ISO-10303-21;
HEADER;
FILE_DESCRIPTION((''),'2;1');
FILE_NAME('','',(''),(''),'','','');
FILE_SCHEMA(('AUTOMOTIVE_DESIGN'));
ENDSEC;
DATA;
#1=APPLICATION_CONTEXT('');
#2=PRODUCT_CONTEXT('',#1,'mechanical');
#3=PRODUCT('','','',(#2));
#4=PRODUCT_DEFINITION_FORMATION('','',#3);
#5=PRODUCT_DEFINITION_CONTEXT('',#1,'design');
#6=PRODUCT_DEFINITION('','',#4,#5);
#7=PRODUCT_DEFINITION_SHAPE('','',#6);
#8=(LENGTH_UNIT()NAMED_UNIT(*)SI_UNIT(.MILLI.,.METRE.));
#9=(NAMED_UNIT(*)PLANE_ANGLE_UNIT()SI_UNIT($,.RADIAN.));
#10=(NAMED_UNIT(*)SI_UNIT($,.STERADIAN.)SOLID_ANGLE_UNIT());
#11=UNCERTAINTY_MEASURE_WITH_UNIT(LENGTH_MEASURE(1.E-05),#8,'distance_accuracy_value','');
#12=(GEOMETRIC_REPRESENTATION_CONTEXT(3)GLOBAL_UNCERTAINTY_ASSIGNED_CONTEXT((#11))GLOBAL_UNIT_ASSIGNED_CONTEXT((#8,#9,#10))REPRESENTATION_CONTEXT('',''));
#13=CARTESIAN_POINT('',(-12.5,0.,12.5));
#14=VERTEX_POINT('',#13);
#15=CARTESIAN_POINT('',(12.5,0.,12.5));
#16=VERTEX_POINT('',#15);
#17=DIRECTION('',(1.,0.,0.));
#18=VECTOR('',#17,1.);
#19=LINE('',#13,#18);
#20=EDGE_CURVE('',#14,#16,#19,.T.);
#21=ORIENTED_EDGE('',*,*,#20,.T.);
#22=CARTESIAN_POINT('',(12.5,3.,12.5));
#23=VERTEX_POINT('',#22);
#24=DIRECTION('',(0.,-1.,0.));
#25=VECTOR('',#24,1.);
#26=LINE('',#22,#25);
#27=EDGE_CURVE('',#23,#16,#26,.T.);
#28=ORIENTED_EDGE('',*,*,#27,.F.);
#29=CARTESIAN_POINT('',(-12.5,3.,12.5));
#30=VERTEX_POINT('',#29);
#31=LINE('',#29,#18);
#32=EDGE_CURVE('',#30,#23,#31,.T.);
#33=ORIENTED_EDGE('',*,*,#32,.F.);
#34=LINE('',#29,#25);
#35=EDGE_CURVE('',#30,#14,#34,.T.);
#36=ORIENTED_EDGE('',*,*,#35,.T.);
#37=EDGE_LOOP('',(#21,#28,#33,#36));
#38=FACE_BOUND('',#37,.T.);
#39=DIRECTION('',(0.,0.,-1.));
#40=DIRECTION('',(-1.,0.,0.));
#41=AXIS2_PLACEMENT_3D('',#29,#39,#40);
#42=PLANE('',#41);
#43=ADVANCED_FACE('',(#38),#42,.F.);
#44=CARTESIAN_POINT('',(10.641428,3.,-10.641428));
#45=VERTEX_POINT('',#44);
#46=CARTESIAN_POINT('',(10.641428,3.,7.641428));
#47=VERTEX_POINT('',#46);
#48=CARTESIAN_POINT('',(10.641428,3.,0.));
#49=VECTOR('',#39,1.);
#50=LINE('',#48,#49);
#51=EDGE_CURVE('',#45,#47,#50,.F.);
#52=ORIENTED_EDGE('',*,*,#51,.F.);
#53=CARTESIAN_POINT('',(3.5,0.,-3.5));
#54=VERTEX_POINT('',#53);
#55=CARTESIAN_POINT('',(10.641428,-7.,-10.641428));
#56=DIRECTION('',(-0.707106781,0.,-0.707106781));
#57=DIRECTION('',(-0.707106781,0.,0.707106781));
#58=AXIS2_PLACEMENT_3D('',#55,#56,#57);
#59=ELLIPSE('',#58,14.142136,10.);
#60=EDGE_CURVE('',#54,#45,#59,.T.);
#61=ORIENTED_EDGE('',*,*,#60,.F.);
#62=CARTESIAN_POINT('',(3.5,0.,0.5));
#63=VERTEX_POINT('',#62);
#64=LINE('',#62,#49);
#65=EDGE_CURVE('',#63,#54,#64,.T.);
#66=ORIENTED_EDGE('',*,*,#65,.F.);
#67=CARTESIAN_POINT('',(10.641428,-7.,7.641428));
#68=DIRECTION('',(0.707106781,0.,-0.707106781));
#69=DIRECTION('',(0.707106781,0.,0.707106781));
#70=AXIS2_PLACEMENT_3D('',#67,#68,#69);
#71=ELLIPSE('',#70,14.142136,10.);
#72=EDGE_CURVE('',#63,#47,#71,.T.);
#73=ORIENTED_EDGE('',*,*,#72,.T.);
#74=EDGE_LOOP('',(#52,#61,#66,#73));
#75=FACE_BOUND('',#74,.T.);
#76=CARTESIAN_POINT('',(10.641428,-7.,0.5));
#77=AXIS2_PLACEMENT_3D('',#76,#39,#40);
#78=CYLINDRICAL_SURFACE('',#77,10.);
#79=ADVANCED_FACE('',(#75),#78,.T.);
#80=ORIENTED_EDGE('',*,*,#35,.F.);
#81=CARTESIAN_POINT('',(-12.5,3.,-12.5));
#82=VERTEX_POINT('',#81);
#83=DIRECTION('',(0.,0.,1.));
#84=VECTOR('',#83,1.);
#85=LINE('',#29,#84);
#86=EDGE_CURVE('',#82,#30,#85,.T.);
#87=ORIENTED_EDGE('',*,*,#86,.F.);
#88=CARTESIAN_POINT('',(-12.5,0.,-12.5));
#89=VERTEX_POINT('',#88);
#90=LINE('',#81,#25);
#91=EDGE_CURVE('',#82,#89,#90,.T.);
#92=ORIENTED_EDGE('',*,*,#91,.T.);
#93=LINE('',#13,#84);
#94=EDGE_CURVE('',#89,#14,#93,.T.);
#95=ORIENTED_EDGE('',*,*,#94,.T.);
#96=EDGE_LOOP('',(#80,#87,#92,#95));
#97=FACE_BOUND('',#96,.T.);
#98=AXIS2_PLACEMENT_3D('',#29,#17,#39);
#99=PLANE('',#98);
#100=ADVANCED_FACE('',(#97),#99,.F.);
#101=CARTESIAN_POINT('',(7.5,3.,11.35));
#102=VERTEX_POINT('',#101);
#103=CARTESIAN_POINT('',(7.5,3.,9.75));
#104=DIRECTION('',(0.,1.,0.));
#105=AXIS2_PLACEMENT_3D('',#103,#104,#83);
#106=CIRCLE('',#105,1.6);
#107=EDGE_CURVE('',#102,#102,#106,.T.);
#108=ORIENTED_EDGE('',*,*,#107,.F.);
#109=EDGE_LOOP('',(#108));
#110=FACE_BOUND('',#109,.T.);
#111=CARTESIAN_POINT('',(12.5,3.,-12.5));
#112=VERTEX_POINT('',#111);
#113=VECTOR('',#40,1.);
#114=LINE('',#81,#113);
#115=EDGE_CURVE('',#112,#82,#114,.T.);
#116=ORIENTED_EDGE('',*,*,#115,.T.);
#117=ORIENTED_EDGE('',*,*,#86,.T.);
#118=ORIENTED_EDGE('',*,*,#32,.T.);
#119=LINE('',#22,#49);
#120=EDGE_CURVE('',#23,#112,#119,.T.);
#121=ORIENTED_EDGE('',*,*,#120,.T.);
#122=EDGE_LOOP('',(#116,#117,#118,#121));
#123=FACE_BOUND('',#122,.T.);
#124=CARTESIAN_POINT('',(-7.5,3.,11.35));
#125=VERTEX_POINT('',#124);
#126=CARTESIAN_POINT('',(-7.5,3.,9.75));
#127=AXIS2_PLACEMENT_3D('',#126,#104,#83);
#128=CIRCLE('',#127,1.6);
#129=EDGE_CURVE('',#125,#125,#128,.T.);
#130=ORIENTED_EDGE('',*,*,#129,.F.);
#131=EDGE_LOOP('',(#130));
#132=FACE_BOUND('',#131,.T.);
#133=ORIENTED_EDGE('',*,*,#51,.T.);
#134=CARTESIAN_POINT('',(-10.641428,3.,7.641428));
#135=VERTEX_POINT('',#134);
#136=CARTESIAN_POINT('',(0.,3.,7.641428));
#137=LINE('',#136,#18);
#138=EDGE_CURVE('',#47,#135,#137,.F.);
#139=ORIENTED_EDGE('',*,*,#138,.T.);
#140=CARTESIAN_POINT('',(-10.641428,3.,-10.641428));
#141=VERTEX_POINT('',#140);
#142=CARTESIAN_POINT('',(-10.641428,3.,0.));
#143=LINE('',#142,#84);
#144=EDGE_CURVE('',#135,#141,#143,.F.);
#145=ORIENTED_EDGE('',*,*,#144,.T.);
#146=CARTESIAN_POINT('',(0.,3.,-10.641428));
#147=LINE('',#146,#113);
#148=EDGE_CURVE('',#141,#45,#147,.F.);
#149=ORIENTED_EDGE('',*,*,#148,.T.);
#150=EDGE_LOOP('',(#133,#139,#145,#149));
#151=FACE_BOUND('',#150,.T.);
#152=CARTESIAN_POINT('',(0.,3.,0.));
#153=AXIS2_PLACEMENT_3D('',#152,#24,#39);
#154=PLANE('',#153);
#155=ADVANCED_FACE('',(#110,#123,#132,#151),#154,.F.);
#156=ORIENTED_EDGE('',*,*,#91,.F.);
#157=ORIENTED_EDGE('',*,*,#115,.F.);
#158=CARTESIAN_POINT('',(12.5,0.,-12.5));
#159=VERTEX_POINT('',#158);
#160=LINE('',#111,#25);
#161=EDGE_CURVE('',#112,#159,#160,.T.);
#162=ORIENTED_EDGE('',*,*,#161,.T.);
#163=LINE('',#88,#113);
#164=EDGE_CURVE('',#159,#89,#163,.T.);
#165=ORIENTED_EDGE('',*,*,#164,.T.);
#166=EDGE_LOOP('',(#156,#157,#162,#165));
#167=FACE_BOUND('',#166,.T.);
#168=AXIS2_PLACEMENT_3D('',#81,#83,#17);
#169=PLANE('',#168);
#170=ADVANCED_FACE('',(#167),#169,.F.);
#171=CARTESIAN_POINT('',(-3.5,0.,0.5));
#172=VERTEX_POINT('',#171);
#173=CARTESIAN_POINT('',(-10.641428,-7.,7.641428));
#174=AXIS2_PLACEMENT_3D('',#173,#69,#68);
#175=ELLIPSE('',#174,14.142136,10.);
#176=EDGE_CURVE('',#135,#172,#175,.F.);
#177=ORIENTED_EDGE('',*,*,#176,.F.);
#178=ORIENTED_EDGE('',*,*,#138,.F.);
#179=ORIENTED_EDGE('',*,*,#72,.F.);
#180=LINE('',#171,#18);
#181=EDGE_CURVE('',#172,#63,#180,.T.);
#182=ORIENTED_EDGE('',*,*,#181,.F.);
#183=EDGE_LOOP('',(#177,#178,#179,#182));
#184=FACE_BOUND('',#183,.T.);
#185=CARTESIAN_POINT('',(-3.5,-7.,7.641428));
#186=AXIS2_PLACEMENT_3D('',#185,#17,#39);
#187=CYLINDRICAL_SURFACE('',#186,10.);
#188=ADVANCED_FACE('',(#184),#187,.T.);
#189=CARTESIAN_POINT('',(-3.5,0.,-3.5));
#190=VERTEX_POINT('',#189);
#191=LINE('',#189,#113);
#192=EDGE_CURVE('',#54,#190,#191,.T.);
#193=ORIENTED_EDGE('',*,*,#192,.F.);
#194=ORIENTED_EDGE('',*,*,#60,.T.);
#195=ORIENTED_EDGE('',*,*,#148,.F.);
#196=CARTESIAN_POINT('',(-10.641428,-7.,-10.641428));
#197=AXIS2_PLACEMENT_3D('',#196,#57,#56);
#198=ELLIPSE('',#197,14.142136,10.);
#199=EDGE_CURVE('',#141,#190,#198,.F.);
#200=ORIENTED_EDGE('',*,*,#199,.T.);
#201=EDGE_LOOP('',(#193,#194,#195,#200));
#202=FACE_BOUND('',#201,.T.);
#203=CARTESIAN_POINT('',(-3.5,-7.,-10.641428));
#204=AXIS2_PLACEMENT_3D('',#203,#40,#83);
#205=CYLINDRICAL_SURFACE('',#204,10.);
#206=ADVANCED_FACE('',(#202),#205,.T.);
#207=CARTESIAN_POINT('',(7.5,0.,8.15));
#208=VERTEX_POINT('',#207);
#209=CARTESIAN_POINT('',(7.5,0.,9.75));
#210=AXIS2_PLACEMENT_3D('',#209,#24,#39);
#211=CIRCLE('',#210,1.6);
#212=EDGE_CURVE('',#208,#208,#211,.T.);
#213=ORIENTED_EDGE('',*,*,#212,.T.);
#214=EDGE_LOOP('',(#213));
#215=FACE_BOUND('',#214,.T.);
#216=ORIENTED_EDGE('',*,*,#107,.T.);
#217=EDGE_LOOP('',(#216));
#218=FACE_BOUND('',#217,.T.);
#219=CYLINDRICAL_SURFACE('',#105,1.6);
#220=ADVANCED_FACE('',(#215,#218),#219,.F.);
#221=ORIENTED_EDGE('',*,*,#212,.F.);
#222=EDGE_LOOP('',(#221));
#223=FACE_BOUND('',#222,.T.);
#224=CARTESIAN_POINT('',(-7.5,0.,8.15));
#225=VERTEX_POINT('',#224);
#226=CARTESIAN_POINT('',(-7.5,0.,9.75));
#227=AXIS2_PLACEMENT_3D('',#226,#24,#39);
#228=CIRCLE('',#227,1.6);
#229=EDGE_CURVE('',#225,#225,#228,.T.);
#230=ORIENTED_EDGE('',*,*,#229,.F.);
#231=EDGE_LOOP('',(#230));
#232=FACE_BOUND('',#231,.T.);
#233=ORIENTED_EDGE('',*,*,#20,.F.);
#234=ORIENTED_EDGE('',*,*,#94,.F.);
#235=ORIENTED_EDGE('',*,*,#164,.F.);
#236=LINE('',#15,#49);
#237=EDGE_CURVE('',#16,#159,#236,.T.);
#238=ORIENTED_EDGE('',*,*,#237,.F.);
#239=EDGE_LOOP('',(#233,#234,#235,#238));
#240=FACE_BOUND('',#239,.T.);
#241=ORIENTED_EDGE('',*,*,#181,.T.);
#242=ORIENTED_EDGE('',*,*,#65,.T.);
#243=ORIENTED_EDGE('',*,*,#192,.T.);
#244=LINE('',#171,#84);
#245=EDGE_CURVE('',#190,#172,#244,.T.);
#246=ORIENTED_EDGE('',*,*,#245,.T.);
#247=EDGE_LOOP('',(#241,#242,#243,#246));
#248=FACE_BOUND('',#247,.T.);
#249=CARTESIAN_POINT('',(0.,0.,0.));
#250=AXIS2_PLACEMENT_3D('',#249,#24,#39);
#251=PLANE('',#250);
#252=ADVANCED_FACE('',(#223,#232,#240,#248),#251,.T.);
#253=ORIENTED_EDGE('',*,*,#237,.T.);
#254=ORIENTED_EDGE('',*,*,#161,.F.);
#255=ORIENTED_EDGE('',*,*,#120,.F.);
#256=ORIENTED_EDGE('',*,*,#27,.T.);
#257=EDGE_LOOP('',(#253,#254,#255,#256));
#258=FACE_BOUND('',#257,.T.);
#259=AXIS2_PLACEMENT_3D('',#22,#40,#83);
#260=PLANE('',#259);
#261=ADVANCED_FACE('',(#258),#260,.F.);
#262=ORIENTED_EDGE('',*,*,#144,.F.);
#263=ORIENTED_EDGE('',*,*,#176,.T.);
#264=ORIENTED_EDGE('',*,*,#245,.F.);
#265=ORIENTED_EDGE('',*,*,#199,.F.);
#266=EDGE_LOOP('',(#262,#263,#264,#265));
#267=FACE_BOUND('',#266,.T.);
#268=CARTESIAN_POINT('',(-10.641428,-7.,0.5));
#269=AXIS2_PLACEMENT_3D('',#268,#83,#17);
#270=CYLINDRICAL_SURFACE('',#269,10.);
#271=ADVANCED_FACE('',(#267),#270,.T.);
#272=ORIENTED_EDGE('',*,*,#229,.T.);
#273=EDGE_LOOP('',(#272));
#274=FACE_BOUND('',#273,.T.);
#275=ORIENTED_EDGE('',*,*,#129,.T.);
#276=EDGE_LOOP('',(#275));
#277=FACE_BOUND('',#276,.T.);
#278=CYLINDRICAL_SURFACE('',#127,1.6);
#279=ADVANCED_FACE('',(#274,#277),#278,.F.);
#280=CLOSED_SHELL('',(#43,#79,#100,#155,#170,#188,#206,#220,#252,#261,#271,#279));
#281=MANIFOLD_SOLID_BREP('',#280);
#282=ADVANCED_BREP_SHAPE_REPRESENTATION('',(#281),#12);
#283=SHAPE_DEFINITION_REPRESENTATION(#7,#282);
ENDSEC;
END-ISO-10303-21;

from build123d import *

# Parameters (mm, degrees)
SKETCH1_W                = 25
SKETCH1_H                = 25
BOSS_EXTRUDE1_DEPTH      = 3
M3_CLEARANCE_HOLE1_D     = 3.2
M3_CLEARANCE_HOLE1_DEPTH = 5
M3_CLEARANCE_HOLE1_TIP   = 0.96137699
SKETCH4_W                = 7
SKETCH4_H                = 4
CUT_EXTRUDE1_DEPTH       = 3
FILLET2_R                = 10


with BuildPart() as part:
    # Sketch1 → Boss-Extrude1 (new body)
    with BuildSketch(Plane(origin=(0, 0, 0), x_dir=(1, 0, 0), z_dir=(0, 1, 0))):
        Rectangle(SKETCH1_W, SKETCH1_H)
    extrude(amount=BOSS_EXTRUDE1_DEPTH)

    # M3 Clearance Hole1
    with Locations(Plane(origin=(-7.5, 3, 9.75), x_dir=(0, 0, 1), z_dir=(0, 1, 0))):
        with Locations((0, 0), (0, 15)):
            Hole(M3_CLEARANCE_HOLE1_D / 2, depth=M3_CLEARANCE_HOLE1_DEPTH)
            with Locations((0, 0, -(M3_CLEARANCE_HOLE1_DEPTH + M3_CLEARANCE_HOLE1_TIP / 2))):  # 118° drill point
                Cone(0, M3_CLEARANCE_HOLE1_D / 2, M3_CLEARANCE_HOLE1_TIP, mode=Mode.SUBTRACT)

    # Sketch4 → Cut-Extrude1 (cut)
    with BuildSketch(Plane(origin=(0, 3, 0), x_dir=(1, 0, 0), z_dir=(0, 1, 0))):
        with Locations((0, 1.5)):
            Rectangle(SKETCH4_W, SKETCH4_H)
    extrude(amount=-CUT_EXTRUDE1_DEPTH, mode=Mode.SUBTRACT)

    # Fillet2
    # the kernel refuses this fillet: 10 mm, written as the material it takes off along each edge
    with BuildSketch(Plane(origin=(3.5, 3, 0.5), x_dir=(1, 0, 0), z_dir=(0, 0, -1)), Plane(origin=(-3.5, 3, -3.5), x_dir=(-1, 0, 0), z_dir=(0, 0, 1))) as fillet2_piece_1:
        with BuildLine():
            CenterArc((7.141428429, 10), FILLET2_R, 224.427004001, 45.572995999)
            Line((0, 3), (0, 0))
            Line((0, 0), (7.141428429, 0))
        make_face()
    extrude(amount=4, mode=Mode.SUBTRACT)
    with BuildSketch(Plane(origin=(3.5, 3, -3.5), x_dir=(0, 0, -1), z_dir=(-1, 0, 0)), Plane(origin=(-3.5, 3, 0.5), x_dir=(0, 0, 1), z_dir=(1, 0, 0))) as fillet2_piece_2:
        with BuildLine():
            CenterArc((7.141428429, 10), FILLET2_R, 224.427004001, 45.572995999)
            Line((0, 3), (0, 0))
            Line((0, 0), (7.141428429, 0))
        make_face()
    extrude(amount=7, mode=Mode.SUBTRACT)
    with BuildSketch(Plane(origin=(-3.5, 3, 0.5), x_dir=(0, 0, 1), z_dir=(1, 0, 0))) as fillet2_piece_3a_section:
        with BuildLine():
            CenterArc((7.141428429, 10), FILLET2_R, 224.427004001, 45.572995999)
            Line((0, 3), (0, 0))
            Line((0, 0), (7.141428429, 0))
        make_face()
    fillet2_piece_3a = extrude(amount=24.853571071, mode=Mode.PRIVATE)
    fillet2_piece_3a = split(fillet2_piece_3a, bisect_by=Plane(origin=(12.5, 3, 0.5), z_dir=(-1, 0, 0)), keep=Keep.TOP, mode=Mode.PRIVATE)
    fillet2_piece_3a = split(fillet2_piece_3a, bisect_by=Plane(origin=(3.5, 3, 0.5), z_dir=(1, 0, 0)), keep=Keep.TOP, mode=Mode.PRIVATE)
    with BuildSketch(Plane(origin=(3.5, 3, 18.353571071), x_dir=(1, 0, 0), z_dir=(0, 0, -1))) as fillet2_piece_3b_section:
        with BuildLine():
            CenterArc((7.141428429, 10), FILLET2_R, 224.427004001, 45.572995999)
            Line((0, 3), (0, 0))
            Line((0, 0), (7.141428429, 0))
        make_face()
    fillet2_piece_3b = extrude(amount=21.853571071, mode=Mode.PRIVATE)
    fillet2_piece_3b = split(fillet2_piece_3b, bisect_by=Plane(origin=(3.5, 3, 12.5), z_dir=(0, 0, -1)), keep=Keep.TOP, mode=Mode.PRIVATE)
    fillet2_piece_3b = fillet2_piece_3b - Plane(origin=(7.5, 3, 9.75), x_dir=(0, 0, -1), z_dir=(0, -1, 0)) * Cylinder(1.6, 73, mode=Mode.PRIVATE)
    fillet2_piece_3b = split(fillet2_piece_3b, bisect_by=Plane(origin=(3.5, 3, 0.5), z_dir=(0, 0, 1)), keep=Keep.TOP, mode=Mode.PRIVATE)
    fillet2_piece_3 = fillet2_piece_3a & fillet2_piece_3b
    add(fillet2_piece_3, mode=Mode.SUBTRACT)
    with BuildSketch(Plane(origin=(3.5, 3, 0.5), x_dir=(1, 0, 0), z_dir=(0, 0, -1))) as fillet2_piece_4a_section:
        with BuildLine():
            CenterArc((7.141428429, 10), FILLET2_R, 224.427004001, 45.572995999)
            Line((0, 3), (0, 0))
            Line((0, 0), (7.141428429, 0))
        make_face()
    fillet2_piece_4a = extrude(amount=21.853571071, mode=Mode.PRIVATE)
    fillet2_piece_4a = split(fillet2_piece_4a, bisect_by=Plane(origin=(3.5, 3, -12.5), z_dir=(0, 0, 1)), keep=Keep.TOP, mode=Mode.PRIVATE)
    fillet2_piece_4a = split(fillet2_piece_4a, bisect_by=Plane(origin=(3.5, 3, -3.5), z_dir=(0, 0, -1)), keep=Keep.TOP, mode=Mode.PRIVATE)
    with BuildSketch(Plane(origin=(21.353571071, 3, -3.5), x_dir=(0, 0, -1), z_dir=(-1, 0, 0))) as fillet2_piece_4b_section:
        with BuildLine():
            CenterArc((7.141428429, 10), FILLET2_R, 224.427004001, 45.572995999)
            Line((0, 3), (0, 0))
            Line((0, 0), (7.141428429, 0))
        make_face()
    fillet2_piece_4b = extrude(amount=24.853571071, mode=Mode.PRIVATE)
    fillet2_piece_4b = split(fillet2_piece_4b, bisect_by=Plane(origin=(12.5, 3, -3.5), z_dir=(-1, 0, 0)), keep=Keep.TOP, mode=Mode.PRIVATE)
    fillet2_piece_4b = split(fillet2_piece_4b, bisect_by=Plane(origin=(3.5, 3, -3.5), z_dir=(1, 0, 0)), keep=Keep.TOP, mode=Mode.PRIVATE)
    fillet2_piece_4 = fillet2_piece_4a & fillet2_piece_4b
    add(fillet2_piece_4, mode=Mode.SUBTRACT)
    with BuildSketch(Plane(origin=(3.5, 3, -3.5), x_dir=(0, 0, -1), z_dir=(-1, 0, 0))) as fillet2_piece_5a_section:
        with BuildLine():
            CenterArc((7.141428429, 10), FILLET2_R, 224.427004001, 45.572995999)
            Line((0, 3), (0, 0))
            Line((0, 0), (7.141428429, 0))
        make_face()
    fillet2_piece_5a = extrude(amount=24.853571071, mode=Mode.PRIVATE)
    fillet2_piece_5a = split(fillet2_piece_5a, bisect_by=Plane(origin=(-12.5, 3, -3.5), z_dir=(1, 0, 0)), keep=Keep.TOP, mode=Mode.PRIVATE)
    fillet2_piece_5a = split(fillet2_piece_5a, bisect_by=Plane(origin=(-3.5, 3, -3.5), z_dir=(-1, 0, 0)), keep=Keep.TOP, mode=Mode.PRIVATE)
    with BuildSketch(Plane(origin=(-3.5, 3, -21.353571071), x_dir=(-1, 0, 0), z_dir=(0, 0, 1))) as fillet2_piece_5b_section:
        with BuildLine():
            CenterArc((7.141428429, 10), FILLET2_R, 224.427004001, 45.572995999)
            Line((0, 3), (0, 0))
            Line((0, 0), (7.141428429, 0))
        make_face()
    fillet2_piece_5b = extrude(amount=21.853571071, mode=Mode.PRIVATE)
    fillet2_piece_5b = split(fillet2_piece_5b, bisect_by=Plane(origin=(-3.5, 3, -12.5), z_dir=(0, 0, 1)), keep=Keep.TOP, mode=Mode.PRIVATE)
    fillet2_piece_5b = split(fillet2_piece_5b, bisect_by=Plane(origin=(-3.5, 3, -3.5), z_dir=(0, 0, -1)), keep=Keep.TOP, mode=Mode.PRIVATE)
    fillet2_piece_5 = fillet2_piece_5a & fillet2_piece_5b
    add(fillet2_piece_5, mode=Mode.SUBTRACT)
    with BuildSketch(Plane(origin=(-21.353571071, 3, 0.5), x_dir=(0, 0, 1), z_dir=(1, 0, 0))) as fillet2_piece_6a_section:
        with BuildLine():
            CenterArc((7.141428429, 10), FILLET2_R, 224.427004001, 45.572995999)
            Line((0, 3), (0, 0))
            Line((0, 0), (7.141428429, 0))
        make_face()
    fillet2_piece_6a = extrude(amount=24.853571071, mode=Mode.PRIVATE)
    fillet2_piece_6a = split(fillet2_piece_6a, bisect_by=Plane(origin=(-12.5, 3, 0.5), z_dir=(1, 0, 0)), keep=Keep.TOP, mode=Mode.PRIVATE)
    fillet2_piece_6a = split(fillet2_piece_6a, bisect_by=Plane(origin=(-3.5, 3, 0.5), z_dir=(-1, 0, 0)), keep=Keep.TOP, mode=Mode.PRIVATE)
    with BuildSketch(Plane(origin=(-3.5, 3, -3.5), x_dir=(-1, 0, 0), z_dir=(0, 0, 1))) as fillet2_piece_6b_section:
        with BuildLine():
            CenterArc((7.141428429, 10), FILLET2_R, 224.427004001, 45.572995999)
            Line((0, 3), (0, 0))
            Line((0, 0), (7.141428429, 0))
        make_face()
    fillet2_piece_6b = extrude(amount=21.853571071, mode=Mode.PRIVATE)
    fillet2_piece_6b = split(fillet2_piece_6b, bisect_by=Plane(origin=(-3.5, 3, 12.5), z_dir=(0, 0, -1)), keep=Keep.TOP, mode=Mode.PRIVATE)
    fillet2_piece_6b = fillet2_piece_6b - Plane(origin=(-7.5, 3, 9.75), x_dir=(0, 0, -1), z_dir=(0, -1, 0)) * Cylinder(1.6, 73, mode=Mode.PRIVATE)
    fillet2_piece_6b = split(fillet2_piece_6b, bisect_by=Plane(origin=(-3.5, 3, 0.5), z_dir=(0, 0, 1)), keep=Keep.TOP, mode=Mode.PRIVATE)
    fillet2_piece_6 = fillet2_piece_6a & fillet2_piece_6b
    add(fillet2_piece_6, mode=Mode.SUBTRACT)


solid = part.part
